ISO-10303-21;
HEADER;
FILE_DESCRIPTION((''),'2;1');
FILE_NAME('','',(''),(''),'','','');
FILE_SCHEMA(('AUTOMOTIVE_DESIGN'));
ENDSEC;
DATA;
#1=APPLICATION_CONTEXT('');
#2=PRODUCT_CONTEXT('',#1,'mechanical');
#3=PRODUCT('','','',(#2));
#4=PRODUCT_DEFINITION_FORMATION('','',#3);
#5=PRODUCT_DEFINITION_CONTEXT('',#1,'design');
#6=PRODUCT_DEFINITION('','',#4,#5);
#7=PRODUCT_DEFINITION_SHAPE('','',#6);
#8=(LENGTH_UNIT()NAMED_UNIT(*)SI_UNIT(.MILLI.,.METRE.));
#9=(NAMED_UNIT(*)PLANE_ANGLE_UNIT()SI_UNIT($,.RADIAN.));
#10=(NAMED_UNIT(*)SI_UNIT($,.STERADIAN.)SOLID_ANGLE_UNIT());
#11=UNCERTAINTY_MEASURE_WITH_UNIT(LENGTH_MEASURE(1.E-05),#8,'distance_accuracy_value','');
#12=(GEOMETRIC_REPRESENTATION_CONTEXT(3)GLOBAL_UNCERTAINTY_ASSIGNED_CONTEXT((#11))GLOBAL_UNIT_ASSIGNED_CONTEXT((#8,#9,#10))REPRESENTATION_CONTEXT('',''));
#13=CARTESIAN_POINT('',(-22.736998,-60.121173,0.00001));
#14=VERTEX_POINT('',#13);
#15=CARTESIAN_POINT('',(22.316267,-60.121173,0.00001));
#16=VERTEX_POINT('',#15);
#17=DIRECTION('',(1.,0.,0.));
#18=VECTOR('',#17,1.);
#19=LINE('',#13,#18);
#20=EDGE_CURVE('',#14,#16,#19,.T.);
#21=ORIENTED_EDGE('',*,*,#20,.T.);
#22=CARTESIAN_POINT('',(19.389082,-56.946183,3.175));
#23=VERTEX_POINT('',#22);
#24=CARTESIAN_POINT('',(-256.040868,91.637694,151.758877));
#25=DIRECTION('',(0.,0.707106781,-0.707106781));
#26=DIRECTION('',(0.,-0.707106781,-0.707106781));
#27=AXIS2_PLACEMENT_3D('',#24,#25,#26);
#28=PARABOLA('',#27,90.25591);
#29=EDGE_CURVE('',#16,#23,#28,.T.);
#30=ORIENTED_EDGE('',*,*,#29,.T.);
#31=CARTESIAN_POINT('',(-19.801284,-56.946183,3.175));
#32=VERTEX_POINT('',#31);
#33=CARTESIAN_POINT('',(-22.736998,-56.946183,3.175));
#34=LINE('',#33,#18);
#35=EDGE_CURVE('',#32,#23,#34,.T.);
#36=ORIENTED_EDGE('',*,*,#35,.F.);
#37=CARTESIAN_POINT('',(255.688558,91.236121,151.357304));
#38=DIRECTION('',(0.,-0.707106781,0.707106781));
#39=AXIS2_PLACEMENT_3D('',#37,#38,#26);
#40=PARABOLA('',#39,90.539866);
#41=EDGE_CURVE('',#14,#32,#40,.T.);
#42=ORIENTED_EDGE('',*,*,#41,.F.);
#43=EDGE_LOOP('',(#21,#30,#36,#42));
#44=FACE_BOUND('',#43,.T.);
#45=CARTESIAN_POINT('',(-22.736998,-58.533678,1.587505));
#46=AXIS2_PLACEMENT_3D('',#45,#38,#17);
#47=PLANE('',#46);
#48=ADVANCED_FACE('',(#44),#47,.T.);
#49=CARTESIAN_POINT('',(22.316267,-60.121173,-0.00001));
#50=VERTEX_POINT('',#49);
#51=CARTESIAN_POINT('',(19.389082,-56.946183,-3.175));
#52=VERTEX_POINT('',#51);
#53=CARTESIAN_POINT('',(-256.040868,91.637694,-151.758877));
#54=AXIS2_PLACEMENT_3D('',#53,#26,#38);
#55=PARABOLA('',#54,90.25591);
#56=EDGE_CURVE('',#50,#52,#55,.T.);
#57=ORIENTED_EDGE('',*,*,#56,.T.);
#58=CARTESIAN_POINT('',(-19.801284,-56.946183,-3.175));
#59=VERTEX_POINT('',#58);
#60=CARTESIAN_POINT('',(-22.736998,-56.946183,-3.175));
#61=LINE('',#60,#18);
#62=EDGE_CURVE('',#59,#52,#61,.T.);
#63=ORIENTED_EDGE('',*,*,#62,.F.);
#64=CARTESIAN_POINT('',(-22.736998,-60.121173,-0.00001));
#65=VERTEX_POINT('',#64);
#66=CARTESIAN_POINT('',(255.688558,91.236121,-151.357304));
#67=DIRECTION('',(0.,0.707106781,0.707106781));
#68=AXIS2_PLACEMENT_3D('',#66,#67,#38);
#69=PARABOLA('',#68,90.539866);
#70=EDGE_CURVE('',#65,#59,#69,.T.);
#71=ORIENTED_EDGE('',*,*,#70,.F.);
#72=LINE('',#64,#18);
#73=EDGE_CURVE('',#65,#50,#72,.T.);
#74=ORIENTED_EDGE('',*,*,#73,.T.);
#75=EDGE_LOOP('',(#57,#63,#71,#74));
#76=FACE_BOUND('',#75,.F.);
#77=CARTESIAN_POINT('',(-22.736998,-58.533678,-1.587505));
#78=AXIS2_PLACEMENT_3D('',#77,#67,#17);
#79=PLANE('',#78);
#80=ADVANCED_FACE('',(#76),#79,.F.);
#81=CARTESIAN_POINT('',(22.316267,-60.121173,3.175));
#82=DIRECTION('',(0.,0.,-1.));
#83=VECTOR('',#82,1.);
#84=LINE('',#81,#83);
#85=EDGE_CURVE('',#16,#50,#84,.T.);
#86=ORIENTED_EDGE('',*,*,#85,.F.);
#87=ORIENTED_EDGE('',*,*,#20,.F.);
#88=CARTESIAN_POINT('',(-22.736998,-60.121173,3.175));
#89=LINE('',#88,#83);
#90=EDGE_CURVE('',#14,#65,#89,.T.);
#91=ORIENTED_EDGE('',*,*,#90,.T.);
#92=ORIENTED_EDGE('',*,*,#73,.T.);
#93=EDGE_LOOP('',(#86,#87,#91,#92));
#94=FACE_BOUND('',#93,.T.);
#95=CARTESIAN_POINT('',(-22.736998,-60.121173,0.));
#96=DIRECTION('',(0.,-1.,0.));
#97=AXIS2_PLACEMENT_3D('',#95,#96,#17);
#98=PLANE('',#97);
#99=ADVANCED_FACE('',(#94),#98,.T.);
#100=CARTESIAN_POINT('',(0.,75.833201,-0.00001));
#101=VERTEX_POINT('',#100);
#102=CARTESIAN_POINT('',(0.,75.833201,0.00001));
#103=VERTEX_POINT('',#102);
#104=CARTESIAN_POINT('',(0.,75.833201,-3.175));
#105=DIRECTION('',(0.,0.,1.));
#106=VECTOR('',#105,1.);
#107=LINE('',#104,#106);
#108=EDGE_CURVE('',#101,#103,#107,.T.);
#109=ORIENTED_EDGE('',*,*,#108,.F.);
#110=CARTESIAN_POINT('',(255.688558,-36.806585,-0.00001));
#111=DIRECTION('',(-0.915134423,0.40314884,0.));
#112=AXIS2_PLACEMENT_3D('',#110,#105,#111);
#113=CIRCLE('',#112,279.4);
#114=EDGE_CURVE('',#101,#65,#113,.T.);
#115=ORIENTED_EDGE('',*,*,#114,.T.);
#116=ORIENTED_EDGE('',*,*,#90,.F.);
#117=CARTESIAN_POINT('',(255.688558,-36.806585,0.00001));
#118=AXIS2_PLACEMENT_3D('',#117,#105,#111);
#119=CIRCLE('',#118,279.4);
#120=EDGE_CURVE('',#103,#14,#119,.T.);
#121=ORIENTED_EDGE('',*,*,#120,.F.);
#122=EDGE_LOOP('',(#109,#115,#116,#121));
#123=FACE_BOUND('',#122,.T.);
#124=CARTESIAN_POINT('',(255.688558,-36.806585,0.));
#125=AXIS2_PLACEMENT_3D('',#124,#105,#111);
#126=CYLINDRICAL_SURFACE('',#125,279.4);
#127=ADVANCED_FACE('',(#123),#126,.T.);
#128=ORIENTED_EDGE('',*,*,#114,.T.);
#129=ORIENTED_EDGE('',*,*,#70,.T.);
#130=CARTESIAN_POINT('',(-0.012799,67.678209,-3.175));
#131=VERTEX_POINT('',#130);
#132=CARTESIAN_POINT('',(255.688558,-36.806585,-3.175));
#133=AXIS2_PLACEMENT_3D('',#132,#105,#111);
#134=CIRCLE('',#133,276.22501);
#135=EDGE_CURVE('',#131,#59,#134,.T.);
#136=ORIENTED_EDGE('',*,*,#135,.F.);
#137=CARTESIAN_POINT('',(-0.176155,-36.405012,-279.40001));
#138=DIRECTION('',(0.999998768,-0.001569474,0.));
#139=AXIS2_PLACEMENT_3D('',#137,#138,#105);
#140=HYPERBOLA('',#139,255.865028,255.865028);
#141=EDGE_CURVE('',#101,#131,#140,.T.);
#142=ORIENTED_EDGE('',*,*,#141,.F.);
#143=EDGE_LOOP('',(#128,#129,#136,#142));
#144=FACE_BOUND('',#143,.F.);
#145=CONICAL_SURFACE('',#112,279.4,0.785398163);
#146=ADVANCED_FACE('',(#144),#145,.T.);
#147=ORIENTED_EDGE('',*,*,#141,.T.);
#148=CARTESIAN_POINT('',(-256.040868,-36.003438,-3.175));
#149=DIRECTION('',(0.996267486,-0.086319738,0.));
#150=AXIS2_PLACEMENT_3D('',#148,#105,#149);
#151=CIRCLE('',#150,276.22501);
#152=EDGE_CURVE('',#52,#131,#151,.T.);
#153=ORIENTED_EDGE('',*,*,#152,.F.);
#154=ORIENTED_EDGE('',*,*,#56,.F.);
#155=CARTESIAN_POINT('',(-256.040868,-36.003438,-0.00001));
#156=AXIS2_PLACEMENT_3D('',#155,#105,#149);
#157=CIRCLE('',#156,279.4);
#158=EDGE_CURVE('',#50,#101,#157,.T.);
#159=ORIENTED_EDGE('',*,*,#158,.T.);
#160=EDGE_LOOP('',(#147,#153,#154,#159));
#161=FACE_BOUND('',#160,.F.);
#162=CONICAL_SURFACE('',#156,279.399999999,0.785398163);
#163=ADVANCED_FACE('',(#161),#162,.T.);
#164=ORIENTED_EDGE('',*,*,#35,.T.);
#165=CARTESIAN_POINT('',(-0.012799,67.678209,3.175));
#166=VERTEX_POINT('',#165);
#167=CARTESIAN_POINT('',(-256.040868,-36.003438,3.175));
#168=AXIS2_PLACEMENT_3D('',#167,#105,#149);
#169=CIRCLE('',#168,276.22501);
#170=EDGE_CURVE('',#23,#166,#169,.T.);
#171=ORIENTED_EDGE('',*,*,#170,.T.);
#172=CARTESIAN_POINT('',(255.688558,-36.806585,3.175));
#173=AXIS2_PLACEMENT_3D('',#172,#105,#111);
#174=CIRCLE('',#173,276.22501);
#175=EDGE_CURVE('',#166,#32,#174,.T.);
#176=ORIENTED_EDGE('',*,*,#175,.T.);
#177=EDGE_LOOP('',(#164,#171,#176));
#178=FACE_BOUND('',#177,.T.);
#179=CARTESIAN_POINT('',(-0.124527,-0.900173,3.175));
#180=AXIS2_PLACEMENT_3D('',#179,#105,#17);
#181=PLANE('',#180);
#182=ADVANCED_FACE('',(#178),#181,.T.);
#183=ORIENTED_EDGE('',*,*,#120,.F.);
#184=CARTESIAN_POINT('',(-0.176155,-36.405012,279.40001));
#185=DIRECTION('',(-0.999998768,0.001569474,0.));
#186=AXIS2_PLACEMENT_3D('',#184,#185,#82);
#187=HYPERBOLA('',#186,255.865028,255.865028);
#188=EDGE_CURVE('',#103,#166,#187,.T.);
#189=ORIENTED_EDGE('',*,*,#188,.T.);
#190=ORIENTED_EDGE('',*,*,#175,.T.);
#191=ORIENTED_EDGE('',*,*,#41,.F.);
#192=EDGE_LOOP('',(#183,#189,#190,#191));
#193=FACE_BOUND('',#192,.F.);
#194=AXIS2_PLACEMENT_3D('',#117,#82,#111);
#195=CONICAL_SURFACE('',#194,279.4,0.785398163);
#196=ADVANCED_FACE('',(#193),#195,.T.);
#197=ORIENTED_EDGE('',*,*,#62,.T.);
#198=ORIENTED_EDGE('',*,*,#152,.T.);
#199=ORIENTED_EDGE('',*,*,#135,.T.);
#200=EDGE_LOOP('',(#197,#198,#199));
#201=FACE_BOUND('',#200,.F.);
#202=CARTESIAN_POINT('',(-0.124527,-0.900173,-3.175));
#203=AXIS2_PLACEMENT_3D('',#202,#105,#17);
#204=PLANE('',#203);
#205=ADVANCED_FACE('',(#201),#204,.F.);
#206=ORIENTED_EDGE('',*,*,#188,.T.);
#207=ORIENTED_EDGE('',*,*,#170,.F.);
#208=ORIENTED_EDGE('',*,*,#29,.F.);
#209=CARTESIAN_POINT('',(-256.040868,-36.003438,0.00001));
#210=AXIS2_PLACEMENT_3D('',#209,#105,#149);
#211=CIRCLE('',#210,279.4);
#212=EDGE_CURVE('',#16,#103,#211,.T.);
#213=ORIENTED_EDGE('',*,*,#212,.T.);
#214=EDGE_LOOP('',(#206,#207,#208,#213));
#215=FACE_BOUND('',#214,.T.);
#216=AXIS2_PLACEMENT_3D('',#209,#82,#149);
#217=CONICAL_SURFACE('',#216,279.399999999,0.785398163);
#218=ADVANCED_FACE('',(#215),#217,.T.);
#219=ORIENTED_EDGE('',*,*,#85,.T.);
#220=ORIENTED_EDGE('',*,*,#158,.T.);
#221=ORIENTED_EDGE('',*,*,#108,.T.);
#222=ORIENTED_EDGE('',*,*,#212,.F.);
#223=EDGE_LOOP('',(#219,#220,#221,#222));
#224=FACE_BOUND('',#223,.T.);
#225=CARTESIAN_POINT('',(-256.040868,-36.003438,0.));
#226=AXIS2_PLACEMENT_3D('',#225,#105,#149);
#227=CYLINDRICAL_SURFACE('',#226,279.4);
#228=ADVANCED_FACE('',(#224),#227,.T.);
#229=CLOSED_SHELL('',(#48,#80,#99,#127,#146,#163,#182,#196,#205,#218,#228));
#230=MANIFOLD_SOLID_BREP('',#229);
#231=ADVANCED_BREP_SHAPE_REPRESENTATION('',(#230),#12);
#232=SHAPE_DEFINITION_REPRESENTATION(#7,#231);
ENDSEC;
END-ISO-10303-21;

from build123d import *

# Parameters (mm, degrees)
F1_DEPTH = 3.175
F2_SIZE  = 3.17499


# Not quite as in the source:
# - a fillet or chamfer is up to 0.001 mm smaller than in the source, because OpenCascade refuses the exact size


with BuildPart() as f1:
    # F0 (on Top) → F1 (new body, symmetric)
    with BuildSketch(Plane.XY):
        with BuildLine():
            ThreePointArc((22.3162673387, -60.1211733557), (19.6694953196, 9.2531133838), (0, 75.8332006216))
            ThreePointArc((0, 75.8332006216), (-19.8842446441, 9.2801862209), (-22.7369976658, -60.1211733557))
            Line((-22.7369976658, -60.1211733557), (22.3162673387, -60.1211733557))
        make_face()
    extrude(amount=F1_DEPTH, both=True)

    # F2 (size 3.175 in the source; OpenCascade refuses exactly that, so slightly less here)
    f2_edges = [f1.edges().sort_by_distance(p)[0] for p in [
        (-0.210365, -60.121173, 3.175),
        (19.669495, 9.253113, 3.175),
        (-19.884245, 9.280186, 3.175),
        (-0.210365, -60.121173, -3.175),
        (19.669495, 9.253113, -3.175),
        (-19.884245, 9.280186, -3.175),
    ]]
    chamfer(f2_edges, length=F2_SIZE)


solid = f1.part
